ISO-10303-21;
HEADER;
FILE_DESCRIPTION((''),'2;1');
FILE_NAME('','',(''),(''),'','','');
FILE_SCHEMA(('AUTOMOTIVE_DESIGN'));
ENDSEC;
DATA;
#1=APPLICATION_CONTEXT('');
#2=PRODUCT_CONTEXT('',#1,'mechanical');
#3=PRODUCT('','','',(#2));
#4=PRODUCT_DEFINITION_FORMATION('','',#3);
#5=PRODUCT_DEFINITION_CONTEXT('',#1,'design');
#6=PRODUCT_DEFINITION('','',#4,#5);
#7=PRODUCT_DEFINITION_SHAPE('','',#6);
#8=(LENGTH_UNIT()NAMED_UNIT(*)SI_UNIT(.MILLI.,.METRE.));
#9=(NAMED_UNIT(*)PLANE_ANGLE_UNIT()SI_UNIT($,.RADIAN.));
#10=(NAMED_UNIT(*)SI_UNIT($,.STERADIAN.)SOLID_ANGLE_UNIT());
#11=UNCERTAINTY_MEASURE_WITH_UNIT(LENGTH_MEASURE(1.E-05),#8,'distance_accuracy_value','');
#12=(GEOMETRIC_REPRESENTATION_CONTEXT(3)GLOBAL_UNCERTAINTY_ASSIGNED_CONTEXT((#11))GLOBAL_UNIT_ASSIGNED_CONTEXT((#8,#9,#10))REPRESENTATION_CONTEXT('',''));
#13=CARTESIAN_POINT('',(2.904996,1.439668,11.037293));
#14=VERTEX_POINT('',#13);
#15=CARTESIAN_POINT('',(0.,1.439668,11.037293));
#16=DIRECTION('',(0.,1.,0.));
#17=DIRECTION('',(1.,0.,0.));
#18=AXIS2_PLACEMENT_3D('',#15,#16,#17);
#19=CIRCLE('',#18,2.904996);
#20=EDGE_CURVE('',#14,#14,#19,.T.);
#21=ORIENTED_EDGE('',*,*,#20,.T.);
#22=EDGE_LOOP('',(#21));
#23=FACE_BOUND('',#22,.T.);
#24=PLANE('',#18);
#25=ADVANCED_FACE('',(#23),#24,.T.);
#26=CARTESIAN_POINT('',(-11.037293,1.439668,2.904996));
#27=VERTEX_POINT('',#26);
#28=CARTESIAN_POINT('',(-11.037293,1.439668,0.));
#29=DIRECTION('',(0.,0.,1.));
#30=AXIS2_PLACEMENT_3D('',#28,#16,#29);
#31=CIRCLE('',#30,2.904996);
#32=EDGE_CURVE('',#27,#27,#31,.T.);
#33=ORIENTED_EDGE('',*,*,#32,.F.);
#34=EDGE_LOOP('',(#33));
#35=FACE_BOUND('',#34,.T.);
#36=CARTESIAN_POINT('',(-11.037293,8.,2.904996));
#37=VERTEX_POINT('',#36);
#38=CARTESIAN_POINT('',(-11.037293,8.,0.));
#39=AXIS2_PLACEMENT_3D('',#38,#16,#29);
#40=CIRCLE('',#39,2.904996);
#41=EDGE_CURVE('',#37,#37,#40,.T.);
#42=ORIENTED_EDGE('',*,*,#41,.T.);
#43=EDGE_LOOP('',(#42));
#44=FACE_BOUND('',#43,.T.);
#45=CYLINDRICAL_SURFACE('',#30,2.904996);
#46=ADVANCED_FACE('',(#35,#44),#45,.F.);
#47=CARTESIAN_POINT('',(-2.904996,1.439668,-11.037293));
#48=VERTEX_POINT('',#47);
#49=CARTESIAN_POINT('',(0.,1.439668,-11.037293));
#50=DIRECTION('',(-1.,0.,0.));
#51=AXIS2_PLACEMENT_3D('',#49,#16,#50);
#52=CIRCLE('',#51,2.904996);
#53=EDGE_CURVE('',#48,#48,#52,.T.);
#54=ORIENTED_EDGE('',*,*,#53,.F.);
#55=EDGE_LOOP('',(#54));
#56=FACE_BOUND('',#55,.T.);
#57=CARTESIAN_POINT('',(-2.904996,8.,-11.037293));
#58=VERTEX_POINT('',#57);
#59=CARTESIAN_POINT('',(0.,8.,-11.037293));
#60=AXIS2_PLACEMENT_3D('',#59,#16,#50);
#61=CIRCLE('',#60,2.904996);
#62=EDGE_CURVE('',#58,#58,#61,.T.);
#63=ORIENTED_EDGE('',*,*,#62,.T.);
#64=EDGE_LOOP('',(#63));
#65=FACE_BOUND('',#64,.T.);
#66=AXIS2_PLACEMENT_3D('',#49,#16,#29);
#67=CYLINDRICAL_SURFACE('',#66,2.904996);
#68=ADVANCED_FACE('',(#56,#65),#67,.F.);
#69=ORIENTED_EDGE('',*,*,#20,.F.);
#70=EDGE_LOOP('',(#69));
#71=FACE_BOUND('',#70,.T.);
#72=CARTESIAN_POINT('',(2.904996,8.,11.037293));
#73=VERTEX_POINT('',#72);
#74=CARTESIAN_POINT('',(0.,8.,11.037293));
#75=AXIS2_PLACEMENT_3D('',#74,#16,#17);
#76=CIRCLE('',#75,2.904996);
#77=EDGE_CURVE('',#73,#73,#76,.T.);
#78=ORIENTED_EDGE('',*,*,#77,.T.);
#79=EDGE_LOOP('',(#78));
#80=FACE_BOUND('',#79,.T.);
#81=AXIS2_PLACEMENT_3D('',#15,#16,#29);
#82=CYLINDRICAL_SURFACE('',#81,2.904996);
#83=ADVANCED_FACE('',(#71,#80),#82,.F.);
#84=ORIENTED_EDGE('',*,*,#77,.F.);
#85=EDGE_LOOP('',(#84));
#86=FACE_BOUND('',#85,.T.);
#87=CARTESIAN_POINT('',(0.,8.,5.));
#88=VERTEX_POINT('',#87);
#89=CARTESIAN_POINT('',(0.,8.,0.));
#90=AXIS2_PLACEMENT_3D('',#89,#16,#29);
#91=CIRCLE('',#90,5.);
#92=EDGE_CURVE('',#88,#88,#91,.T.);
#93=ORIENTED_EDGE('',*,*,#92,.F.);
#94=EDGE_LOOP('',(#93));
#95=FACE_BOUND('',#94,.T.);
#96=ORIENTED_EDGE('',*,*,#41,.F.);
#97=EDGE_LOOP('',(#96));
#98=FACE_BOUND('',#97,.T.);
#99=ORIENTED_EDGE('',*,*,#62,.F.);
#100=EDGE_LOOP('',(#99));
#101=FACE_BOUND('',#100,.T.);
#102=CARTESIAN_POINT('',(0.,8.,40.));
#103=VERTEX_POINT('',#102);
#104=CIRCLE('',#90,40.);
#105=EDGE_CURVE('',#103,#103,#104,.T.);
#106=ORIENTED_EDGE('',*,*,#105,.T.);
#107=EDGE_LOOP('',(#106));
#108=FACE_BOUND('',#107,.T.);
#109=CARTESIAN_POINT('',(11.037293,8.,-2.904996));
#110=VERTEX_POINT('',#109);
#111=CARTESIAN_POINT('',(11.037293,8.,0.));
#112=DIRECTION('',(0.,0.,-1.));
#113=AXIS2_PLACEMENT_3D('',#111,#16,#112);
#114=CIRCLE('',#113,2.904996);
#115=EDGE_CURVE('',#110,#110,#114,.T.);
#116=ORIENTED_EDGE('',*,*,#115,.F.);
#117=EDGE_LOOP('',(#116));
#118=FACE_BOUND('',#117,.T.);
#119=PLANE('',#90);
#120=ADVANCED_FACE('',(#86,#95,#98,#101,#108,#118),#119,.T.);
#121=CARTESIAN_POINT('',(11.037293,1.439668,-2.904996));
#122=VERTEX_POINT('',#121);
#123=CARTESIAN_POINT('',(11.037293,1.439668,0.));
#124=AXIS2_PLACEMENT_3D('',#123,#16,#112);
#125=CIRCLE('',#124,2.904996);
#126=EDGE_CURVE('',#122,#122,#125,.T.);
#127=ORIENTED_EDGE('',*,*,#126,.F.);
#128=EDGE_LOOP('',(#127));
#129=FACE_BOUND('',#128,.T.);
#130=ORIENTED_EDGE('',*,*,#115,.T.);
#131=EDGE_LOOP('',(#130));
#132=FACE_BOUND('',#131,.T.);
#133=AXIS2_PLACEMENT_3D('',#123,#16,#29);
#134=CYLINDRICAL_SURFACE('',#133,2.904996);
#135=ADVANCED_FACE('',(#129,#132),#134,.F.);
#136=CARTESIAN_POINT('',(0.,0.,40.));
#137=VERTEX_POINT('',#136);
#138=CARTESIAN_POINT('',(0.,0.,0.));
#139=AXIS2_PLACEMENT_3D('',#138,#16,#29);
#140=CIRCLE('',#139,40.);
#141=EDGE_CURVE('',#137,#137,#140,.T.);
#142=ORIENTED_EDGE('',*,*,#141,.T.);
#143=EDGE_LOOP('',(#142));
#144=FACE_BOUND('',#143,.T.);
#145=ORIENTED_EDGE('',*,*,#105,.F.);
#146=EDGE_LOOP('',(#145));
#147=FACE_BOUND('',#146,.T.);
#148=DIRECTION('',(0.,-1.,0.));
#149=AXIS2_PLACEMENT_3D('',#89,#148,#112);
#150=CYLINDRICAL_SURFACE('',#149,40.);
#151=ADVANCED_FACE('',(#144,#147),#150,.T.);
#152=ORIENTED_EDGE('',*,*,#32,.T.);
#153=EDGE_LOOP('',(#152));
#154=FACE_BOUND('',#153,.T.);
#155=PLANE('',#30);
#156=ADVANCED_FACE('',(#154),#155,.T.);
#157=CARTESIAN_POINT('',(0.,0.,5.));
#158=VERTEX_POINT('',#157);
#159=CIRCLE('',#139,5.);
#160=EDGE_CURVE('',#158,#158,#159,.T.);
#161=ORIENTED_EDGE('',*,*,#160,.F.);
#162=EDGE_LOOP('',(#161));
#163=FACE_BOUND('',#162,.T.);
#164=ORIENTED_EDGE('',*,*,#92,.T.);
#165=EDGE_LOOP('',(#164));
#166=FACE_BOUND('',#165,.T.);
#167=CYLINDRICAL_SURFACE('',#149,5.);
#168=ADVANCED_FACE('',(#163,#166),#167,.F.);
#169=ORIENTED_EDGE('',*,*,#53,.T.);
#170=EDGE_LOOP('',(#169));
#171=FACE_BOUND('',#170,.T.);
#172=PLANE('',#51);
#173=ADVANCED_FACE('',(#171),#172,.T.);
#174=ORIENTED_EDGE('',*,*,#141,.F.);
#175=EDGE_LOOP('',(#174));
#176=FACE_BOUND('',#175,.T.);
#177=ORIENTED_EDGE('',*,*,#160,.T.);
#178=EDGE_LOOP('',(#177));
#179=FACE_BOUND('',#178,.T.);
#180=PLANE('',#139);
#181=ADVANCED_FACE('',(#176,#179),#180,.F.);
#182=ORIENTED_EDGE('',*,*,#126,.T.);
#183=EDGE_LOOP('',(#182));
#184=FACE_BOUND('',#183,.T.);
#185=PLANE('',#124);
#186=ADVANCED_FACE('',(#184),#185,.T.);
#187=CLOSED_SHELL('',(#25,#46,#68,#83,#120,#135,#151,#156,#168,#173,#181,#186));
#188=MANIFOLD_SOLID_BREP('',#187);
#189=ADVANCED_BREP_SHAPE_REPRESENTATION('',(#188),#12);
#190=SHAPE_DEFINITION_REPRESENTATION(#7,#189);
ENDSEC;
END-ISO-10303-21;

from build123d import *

# Parameters (mm, degrees)
SKETCH1_R           = 40
BOSS_EXTRUDE1_DEPTH = 8
SKETCH2_R           = 5
CUT_EXTRUDE1_DEPTH  = 58.131427428
SKETCH3_R           = 2.904995581
CUT_EXTRUDE2_DEPTH  = 6.560332369
CIRPATTERN1_COUNT   = 4


with BuildPart() as part:
    # Sketch1 → Boss-Extrude1 (new body)
    with BuildSketch(Plane(origin=(0, 0, 0), x_dir=(1, 0, 0), z_dir=(0, 1, 0))):
        Circle(SKETCH1_R)
    extrude(amount=BOSS_EXTRUDE1_DEPTH)

    # Sketch2 → Cut-Extrude1 (cut, through all)
    with BuildSketch(Plane(origin=(0, 0, 0), x_dir=(1, 0, 0), z_dir=(0, 1, 0))):
        Circle(SKETCH2_R)
    extrude(amount=CUT_EXTRUDE1_DEPTH, mode=Mode.SUBTRACT)

    # Sketch3 → Cut-Extrude2 (cut)
    with BuildSketch(Plane(origin=(0, 8, 0), x_dir=(1, 0, 0), z_dir=(0, 1, 0))):
        with Locations((-11.037292591, 0)):
            Circle(SKETCH3_R)
    cut_extrude2 = extrude(amount=-CUT_EXTRUDE2_DEPTH, mode=Mode.SUBTRACT)

    # CirPattern1: Cut-Extrude2 ×4 about axis
    cirpattern1_axis = Axis((0, 0, 0), (0, 1, 0))
    for i in range(1, CIRPATTERN1_COUNT):
        add(cut_extrude2.rotate(cirpattern1_axis, i * 360 / CIRPATTERN1_COUNT), mode=Mode.SUBTRACT)


solid = part.part
